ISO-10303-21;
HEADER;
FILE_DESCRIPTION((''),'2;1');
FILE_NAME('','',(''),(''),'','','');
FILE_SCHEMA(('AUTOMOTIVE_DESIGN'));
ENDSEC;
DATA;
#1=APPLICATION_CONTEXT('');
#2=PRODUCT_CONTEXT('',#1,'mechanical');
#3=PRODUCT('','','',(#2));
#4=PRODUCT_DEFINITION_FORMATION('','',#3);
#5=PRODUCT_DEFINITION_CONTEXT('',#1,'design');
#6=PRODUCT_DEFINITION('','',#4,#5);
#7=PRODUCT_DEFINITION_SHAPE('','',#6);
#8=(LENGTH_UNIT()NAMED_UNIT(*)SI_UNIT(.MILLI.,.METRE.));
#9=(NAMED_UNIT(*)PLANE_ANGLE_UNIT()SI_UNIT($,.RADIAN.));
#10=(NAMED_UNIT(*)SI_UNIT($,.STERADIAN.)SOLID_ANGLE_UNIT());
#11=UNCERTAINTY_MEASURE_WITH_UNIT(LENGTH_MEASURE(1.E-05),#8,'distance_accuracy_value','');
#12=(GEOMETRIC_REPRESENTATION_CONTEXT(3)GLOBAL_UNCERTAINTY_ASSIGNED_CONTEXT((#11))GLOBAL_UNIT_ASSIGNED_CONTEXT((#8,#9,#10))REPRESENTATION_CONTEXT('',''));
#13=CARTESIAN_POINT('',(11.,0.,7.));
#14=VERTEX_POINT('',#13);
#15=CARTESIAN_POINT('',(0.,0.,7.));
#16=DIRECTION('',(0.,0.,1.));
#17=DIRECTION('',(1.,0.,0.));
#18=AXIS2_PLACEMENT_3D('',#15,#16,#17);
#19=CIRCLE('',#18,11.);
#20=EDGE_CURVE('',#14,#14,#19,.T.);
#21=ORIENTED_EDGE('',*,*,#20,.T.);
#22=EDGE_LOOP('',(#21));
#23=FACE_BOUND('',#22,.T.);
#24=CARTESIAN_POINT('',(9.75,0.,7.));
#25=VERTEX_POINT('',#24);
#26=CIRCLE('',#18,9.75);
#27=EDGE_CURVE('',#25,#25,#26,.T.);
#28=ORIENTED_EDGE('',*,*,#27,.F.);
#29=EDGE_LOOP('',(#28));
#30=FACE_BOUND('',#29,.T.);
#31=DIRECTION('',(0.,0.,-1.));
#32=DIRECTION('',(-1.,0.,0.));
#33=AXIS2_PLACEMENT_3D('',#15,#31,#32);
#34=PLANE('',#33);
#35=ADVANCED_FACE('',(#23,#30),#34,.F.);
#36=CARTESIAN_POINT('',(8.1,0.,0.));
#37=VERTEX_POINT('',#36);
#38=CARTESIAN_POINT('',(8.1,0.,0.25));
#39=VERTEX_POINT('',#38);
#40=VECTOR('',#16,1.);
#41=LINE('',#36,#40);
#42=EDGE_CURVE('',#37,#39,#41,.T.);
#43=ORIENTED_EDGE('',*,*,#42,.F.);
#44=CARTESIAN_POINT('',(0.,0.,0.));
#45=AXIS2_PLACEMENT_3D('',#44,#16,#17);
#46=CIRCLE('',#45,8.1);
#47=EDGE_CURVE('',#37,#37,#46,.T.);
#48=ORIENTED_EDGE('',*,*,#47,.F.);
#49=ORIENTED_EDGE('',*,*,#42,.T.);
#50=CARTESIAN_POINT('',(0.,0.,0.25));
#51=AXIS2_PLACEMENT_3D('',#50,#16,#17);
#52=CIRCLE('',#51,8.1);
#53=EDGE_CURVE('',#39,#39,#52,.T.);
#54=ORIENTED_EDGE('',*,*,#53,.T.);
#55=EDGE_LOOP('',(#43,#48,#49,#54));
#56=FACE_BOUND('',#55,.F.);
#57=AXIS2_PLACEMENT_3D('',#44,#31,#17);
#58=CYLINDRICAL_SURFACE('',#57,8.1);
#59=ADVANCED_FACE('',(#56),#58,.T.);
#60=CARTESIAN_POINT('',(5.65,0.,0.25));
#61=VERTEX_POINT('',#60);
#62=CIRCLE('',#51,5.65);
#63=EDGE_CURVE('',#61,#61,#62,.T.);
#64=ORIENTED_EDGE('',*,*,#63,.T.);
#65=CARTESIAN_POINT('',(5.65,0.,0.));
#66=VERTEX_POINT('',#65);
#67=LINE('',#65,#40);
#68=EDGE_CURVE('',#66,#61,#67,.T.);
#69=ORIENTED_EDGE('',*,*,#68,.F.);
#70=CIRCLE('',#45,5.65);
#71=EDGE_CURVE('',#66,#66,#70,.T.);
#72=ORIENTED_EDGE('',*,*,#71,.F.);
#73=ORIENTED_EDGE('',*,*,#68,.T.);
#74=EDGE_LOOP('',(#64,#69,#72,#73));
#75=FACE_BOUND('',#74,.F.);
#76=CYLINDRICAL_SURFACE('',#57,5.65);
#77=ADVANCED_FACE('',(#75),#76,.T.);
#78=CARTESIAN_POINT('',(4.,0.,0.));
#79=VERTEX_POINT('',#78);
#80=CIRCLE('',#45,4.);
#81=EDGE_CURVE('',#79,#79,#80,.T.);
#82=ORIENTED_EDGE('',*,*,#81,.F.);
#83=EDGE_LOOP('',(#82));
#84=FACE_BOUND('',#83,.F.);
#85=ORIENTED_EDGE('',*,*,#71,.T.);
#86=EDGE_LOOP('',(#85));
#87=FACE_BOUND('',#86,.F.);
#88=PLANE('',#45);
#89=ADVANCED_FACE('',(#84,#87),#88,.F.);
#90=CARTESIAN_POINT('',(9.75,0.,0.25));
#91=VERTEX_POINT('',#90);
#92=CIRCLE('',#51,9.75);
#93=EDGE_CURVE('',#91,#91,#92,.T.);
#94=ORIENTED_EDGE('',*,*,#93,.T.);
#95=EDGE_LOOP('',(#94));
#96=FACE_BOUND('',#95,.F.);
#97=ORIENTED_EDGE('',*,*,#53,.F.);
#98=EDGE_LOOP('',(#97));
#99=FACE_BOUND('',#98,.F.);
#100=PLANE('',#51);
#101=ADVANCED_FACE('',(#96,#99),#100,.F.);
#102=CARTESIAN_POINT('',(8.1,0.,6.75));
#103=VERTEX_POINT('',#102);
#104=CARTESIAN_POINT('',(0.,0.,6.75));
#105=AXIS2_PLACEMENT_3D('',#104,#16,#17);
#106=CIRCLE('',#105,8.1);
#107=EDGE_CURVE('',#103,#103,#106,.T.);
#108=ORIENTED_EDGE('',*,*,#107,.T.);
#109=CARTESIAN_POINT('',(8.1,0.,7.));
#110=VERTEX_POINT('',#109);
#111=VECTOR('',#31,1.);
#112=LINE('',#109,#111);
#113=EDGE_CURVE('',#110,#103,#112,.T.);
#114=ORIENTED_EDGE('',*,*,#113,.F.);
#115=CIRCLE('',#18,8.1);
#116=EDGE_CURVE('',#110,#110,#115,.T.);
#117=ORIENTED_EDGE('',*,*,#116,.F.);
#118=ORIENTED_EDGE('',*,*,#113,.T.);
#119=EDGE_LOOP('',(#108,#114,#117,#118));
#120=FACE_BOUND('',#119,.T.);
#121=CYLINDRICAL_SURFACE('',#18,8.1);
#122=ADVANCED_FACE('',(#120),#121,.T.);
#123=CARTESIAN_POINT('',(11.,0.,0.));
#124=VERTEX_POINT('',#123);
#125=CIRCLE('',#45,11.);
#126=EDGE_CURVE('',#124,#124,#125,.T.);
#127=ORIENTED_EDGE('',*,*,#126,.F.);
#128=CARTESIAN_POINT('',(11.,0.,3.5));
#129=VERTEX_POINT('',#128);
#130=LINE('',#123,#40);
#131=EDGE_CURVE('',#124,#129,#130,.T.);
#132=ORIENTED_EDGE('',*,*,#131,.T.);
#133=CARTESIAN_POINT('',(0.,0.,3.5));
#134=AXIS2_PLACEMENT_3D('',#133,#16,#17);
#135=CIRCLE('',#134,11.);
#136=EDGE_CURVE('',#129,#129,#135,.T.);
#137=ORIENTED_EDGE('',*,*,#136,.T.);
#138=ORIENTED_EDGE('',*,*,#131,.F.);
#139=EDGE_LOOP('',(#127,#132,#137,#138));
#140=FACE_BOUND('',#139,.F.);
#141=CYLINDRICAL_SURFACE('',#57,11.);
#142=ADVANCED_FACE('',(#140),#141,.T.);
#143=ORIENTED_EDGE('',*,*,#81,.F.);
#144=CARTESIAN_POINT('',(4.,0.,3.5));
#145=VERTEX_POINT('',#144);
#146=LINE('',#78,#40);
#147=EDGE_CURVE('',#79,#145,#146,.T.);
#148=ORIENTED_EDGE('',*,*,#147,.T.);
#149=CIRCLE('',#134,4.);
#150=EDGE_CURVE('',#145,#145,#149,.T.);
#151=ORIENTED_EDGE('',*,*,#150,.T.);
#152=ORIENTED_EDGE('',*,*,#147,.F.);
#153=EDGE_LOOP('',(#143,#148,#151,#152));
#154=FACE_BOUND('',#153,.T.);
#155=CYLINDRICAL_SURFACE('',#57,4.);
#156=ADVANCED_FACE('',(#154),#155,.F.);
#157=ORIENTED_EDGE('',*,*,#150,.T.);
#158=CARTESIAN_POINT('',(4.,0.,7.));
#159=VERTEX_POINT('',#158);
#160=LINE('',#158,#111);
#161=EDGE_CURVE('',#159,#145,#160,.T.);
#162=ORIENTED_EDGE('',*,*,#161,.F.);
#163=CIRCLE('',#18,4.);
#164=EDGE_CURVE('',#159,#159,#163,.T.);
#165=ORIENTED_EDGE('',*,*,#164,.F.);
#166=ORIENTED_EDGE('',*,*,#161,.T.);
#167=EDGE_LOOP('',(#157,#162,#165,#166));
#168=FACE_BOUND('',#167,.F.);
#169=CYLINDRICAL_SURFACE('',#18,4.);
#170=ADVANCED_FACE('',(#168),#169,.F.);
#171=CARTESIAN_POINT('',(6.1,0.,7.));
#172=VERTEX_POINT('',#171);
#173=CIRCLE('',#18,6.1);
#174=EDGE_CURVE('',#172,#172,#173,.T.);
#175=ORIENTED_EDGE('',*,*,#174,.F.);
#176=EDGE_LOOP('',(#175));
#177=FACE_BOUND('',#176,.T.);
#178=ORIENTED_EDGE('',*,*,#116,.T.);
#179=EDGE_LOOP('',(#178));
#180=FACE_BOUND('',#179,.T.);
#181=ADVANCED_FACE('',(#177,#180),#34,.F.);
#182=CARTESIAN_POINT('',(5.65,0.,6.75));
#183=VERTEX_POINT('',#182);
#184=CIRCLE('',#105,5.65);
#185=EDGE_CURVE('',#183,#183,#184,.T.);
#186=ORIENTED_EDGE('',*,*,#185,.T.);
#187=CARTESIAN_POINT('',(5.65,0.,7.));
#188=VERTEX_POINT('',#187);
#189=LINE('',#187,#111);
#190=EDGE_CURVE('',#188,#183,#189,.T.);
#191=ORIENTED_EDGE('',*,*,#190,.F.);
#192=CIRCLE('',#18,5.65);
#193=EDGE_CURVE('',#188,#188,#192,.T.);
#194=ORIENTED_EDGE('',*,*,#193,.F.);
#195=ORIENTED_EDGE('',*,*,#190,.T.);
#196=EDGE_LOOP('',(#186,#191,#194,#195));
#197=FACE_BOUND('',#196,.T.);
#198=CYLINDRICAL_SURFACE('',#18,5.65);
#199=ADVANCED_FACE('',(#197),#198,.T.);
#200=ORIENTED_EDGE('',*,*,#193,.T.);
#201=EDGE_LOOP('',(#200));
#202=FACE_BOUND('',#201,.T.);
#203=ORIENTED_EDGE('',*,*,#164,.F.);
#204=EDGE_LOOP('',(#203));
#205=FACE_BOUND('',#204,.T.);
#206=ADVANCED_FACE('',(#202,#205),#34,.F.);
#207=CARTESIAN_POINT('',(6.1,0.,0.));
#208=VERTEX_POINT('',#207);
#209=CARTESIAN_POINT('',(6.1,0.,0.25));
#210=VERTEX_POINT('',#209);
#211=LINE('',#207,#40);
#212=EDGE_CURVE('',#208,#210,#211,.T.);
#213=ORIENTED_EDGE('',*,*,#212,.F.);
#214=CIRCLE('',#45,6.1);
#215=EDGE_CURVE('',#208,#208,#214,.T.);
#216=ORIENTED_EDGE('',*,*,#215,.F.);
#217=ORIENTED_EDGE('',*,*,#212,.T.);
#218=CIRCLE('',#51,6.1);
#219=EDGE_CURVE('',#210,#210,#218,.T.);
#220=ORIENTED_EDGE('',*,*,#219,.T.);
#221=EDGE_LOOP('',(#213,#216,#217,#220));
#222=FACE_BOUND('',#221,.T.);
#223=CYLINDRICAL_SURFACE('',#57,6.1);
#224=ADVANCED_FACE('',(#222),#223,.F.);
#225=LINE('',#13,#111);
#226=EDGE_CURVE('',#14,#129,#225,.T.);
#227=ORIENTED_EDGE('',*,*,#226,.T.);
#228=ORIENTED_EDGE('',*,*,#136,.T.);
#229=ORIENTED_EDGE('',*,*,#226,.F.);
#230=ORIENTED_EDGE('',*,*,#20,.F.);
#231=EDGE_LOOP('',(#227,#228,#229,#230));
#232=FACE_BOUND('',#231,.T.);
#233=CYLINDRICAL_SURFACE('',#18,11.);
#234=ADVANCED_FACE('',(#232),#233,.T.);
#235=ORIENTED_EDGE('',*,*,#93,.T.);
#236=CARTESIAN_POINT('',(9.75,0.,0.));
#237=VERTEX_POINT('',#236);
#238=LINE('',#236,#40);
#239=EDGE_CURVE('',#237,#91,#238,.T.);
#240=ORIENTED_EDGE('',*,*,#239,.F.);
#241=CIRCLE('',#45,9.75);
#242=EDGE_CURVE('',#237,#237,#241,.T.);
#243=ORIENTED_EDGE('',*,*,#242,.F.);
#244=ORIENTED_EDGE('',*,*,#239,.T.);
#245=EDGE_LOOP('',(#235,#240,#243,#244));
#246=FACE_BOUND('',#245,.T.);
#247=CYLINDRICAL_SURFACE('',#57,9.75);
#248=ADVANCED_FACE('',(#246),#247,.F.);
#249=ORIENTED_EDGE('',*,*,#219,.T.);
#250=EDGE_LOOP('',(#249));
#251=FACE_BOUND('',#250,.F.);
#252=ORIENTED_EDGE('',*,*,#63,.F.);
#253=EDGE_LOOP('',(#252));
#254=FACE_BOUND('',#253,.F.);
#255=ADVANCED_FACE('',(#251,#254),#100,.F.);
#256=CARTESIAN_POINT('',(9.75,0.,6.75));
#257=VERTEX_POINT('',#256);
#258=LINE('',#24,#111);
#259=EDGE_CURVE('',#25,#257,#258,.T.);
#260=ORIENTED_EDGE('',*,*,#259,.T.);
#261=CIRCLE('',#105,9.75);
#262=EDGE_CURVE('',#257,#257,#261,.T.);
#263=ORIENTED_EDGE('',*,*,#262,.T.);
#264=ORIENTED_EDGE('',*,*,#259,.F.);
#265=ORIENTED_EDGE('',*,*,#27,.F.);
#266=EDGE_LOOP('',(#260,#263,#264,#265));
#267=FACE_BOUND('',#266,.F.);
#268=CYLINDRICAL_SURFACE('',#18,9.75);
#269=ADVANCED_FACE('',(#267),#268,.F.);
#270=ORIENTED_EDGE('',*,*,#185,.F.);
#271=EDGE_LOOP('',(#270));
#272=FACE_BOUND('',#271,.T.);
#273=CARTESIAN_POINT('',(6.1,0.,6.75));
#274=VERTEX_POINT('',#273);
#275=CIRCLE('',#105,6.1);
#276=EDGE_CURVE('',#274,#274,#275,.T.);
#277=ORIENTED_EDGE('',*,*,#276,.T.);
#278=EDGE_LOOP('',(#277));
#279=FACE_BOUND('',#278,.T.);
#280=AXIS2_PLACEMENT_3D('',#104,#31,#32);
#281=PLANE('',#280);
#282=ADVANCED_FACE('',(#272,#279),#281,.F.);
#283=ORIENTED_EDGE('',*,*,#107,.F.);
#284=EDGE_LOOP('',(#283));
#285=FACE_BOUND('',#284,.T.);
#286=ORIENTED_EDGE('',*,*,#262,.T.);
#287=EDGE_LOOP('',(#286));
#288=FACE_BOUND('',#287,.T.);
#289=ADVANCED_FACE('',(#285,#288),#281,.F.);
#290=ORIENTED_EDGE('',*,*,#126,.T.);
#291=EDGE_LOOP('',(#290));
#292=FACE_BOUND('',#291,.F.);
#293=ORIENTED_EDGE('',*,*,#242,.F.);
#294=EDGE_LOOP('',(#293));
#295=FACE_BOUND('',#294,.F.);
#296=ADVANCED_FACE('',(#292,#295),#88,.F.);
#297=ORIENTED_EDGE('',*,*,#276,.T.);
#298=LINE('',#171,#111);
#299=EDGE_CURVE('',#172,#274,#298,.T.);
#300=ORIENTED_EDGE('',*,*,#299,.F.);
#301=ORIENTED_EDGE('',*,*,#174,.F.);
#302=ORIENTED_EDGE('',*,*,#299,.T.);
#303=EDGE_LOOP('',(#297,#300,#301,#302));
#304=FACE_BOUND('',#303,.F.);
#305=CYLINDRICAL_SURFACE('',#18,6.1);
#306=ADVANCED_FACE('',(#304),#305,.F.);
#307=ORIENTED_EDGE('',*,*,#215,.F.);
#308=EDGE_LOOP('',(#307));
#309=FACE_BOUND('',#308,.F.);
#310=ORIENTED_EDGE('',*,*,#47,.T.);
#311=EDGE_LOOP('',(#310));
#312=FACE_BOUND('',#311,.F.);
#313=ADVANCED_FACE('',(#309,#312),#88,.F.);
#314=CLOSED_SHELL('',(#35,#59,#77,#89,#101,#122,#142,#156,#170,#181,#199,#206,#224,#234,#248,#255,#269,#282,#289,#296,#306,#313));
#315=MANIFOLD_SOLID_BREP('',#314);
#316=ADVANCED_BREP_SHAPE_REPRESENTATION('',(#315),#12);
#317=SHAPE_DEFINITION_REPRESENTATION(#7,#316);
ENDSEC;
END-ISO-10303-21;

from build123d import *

# Parameters (mm, degrees)
F0_R     = 11
F0_R_2   = 9.75
F0_R_3   = 8.1
F0_R_4   = 6.1
F0_R_5   = 5.65
F0_R_6   = 4
F1_DEPTH = 3.5
F2_DEPTH = 0.25


with BuildPart() as f1:
    # F0 (on Top) → F1 (new body)
    with BuildSketch(Plane.XY):
        Circle(F0_R)
        Circle(F0_R_2, mode=Mode.SUBTRACT)
        Circle(F0_R_2)
        Circle(F0_R_3, mode=Mode.SUBTRACT)
        Circle(F0_R_3)
        Circle(F0_R_4, mode=Mode.SUBTRACT)
        Circle(F0_R_4)
        Circle(F0_R_5, mode=Mode.SUBTRACT)
        Circle(F0_R_5)
        Circle(F0_R_6, mode=Mode.SUBTRACT)
    extrude(amount=F1_DEPTH)

    # F0 (on Top) → F2 (cut)
    with BuildSketch(Plane.XY):
        Circle(F0_R_2)
        Circle(F0_R_3, mode=Mode.SUBTRACT)
        Circle(F0_R_4)
        Circle(F0_R_5, mode=Mode.SUBTRACT)
    extrude(amount=F2_DEPTH, mode=Mode.SUBTRACT)

    # F3: F1 across face


with BuildPart() as f1_1:
    add(f1.part)
    add(f1.part.mirror(Plane.XY.offset(3.5)))


solid = f1_1.part
